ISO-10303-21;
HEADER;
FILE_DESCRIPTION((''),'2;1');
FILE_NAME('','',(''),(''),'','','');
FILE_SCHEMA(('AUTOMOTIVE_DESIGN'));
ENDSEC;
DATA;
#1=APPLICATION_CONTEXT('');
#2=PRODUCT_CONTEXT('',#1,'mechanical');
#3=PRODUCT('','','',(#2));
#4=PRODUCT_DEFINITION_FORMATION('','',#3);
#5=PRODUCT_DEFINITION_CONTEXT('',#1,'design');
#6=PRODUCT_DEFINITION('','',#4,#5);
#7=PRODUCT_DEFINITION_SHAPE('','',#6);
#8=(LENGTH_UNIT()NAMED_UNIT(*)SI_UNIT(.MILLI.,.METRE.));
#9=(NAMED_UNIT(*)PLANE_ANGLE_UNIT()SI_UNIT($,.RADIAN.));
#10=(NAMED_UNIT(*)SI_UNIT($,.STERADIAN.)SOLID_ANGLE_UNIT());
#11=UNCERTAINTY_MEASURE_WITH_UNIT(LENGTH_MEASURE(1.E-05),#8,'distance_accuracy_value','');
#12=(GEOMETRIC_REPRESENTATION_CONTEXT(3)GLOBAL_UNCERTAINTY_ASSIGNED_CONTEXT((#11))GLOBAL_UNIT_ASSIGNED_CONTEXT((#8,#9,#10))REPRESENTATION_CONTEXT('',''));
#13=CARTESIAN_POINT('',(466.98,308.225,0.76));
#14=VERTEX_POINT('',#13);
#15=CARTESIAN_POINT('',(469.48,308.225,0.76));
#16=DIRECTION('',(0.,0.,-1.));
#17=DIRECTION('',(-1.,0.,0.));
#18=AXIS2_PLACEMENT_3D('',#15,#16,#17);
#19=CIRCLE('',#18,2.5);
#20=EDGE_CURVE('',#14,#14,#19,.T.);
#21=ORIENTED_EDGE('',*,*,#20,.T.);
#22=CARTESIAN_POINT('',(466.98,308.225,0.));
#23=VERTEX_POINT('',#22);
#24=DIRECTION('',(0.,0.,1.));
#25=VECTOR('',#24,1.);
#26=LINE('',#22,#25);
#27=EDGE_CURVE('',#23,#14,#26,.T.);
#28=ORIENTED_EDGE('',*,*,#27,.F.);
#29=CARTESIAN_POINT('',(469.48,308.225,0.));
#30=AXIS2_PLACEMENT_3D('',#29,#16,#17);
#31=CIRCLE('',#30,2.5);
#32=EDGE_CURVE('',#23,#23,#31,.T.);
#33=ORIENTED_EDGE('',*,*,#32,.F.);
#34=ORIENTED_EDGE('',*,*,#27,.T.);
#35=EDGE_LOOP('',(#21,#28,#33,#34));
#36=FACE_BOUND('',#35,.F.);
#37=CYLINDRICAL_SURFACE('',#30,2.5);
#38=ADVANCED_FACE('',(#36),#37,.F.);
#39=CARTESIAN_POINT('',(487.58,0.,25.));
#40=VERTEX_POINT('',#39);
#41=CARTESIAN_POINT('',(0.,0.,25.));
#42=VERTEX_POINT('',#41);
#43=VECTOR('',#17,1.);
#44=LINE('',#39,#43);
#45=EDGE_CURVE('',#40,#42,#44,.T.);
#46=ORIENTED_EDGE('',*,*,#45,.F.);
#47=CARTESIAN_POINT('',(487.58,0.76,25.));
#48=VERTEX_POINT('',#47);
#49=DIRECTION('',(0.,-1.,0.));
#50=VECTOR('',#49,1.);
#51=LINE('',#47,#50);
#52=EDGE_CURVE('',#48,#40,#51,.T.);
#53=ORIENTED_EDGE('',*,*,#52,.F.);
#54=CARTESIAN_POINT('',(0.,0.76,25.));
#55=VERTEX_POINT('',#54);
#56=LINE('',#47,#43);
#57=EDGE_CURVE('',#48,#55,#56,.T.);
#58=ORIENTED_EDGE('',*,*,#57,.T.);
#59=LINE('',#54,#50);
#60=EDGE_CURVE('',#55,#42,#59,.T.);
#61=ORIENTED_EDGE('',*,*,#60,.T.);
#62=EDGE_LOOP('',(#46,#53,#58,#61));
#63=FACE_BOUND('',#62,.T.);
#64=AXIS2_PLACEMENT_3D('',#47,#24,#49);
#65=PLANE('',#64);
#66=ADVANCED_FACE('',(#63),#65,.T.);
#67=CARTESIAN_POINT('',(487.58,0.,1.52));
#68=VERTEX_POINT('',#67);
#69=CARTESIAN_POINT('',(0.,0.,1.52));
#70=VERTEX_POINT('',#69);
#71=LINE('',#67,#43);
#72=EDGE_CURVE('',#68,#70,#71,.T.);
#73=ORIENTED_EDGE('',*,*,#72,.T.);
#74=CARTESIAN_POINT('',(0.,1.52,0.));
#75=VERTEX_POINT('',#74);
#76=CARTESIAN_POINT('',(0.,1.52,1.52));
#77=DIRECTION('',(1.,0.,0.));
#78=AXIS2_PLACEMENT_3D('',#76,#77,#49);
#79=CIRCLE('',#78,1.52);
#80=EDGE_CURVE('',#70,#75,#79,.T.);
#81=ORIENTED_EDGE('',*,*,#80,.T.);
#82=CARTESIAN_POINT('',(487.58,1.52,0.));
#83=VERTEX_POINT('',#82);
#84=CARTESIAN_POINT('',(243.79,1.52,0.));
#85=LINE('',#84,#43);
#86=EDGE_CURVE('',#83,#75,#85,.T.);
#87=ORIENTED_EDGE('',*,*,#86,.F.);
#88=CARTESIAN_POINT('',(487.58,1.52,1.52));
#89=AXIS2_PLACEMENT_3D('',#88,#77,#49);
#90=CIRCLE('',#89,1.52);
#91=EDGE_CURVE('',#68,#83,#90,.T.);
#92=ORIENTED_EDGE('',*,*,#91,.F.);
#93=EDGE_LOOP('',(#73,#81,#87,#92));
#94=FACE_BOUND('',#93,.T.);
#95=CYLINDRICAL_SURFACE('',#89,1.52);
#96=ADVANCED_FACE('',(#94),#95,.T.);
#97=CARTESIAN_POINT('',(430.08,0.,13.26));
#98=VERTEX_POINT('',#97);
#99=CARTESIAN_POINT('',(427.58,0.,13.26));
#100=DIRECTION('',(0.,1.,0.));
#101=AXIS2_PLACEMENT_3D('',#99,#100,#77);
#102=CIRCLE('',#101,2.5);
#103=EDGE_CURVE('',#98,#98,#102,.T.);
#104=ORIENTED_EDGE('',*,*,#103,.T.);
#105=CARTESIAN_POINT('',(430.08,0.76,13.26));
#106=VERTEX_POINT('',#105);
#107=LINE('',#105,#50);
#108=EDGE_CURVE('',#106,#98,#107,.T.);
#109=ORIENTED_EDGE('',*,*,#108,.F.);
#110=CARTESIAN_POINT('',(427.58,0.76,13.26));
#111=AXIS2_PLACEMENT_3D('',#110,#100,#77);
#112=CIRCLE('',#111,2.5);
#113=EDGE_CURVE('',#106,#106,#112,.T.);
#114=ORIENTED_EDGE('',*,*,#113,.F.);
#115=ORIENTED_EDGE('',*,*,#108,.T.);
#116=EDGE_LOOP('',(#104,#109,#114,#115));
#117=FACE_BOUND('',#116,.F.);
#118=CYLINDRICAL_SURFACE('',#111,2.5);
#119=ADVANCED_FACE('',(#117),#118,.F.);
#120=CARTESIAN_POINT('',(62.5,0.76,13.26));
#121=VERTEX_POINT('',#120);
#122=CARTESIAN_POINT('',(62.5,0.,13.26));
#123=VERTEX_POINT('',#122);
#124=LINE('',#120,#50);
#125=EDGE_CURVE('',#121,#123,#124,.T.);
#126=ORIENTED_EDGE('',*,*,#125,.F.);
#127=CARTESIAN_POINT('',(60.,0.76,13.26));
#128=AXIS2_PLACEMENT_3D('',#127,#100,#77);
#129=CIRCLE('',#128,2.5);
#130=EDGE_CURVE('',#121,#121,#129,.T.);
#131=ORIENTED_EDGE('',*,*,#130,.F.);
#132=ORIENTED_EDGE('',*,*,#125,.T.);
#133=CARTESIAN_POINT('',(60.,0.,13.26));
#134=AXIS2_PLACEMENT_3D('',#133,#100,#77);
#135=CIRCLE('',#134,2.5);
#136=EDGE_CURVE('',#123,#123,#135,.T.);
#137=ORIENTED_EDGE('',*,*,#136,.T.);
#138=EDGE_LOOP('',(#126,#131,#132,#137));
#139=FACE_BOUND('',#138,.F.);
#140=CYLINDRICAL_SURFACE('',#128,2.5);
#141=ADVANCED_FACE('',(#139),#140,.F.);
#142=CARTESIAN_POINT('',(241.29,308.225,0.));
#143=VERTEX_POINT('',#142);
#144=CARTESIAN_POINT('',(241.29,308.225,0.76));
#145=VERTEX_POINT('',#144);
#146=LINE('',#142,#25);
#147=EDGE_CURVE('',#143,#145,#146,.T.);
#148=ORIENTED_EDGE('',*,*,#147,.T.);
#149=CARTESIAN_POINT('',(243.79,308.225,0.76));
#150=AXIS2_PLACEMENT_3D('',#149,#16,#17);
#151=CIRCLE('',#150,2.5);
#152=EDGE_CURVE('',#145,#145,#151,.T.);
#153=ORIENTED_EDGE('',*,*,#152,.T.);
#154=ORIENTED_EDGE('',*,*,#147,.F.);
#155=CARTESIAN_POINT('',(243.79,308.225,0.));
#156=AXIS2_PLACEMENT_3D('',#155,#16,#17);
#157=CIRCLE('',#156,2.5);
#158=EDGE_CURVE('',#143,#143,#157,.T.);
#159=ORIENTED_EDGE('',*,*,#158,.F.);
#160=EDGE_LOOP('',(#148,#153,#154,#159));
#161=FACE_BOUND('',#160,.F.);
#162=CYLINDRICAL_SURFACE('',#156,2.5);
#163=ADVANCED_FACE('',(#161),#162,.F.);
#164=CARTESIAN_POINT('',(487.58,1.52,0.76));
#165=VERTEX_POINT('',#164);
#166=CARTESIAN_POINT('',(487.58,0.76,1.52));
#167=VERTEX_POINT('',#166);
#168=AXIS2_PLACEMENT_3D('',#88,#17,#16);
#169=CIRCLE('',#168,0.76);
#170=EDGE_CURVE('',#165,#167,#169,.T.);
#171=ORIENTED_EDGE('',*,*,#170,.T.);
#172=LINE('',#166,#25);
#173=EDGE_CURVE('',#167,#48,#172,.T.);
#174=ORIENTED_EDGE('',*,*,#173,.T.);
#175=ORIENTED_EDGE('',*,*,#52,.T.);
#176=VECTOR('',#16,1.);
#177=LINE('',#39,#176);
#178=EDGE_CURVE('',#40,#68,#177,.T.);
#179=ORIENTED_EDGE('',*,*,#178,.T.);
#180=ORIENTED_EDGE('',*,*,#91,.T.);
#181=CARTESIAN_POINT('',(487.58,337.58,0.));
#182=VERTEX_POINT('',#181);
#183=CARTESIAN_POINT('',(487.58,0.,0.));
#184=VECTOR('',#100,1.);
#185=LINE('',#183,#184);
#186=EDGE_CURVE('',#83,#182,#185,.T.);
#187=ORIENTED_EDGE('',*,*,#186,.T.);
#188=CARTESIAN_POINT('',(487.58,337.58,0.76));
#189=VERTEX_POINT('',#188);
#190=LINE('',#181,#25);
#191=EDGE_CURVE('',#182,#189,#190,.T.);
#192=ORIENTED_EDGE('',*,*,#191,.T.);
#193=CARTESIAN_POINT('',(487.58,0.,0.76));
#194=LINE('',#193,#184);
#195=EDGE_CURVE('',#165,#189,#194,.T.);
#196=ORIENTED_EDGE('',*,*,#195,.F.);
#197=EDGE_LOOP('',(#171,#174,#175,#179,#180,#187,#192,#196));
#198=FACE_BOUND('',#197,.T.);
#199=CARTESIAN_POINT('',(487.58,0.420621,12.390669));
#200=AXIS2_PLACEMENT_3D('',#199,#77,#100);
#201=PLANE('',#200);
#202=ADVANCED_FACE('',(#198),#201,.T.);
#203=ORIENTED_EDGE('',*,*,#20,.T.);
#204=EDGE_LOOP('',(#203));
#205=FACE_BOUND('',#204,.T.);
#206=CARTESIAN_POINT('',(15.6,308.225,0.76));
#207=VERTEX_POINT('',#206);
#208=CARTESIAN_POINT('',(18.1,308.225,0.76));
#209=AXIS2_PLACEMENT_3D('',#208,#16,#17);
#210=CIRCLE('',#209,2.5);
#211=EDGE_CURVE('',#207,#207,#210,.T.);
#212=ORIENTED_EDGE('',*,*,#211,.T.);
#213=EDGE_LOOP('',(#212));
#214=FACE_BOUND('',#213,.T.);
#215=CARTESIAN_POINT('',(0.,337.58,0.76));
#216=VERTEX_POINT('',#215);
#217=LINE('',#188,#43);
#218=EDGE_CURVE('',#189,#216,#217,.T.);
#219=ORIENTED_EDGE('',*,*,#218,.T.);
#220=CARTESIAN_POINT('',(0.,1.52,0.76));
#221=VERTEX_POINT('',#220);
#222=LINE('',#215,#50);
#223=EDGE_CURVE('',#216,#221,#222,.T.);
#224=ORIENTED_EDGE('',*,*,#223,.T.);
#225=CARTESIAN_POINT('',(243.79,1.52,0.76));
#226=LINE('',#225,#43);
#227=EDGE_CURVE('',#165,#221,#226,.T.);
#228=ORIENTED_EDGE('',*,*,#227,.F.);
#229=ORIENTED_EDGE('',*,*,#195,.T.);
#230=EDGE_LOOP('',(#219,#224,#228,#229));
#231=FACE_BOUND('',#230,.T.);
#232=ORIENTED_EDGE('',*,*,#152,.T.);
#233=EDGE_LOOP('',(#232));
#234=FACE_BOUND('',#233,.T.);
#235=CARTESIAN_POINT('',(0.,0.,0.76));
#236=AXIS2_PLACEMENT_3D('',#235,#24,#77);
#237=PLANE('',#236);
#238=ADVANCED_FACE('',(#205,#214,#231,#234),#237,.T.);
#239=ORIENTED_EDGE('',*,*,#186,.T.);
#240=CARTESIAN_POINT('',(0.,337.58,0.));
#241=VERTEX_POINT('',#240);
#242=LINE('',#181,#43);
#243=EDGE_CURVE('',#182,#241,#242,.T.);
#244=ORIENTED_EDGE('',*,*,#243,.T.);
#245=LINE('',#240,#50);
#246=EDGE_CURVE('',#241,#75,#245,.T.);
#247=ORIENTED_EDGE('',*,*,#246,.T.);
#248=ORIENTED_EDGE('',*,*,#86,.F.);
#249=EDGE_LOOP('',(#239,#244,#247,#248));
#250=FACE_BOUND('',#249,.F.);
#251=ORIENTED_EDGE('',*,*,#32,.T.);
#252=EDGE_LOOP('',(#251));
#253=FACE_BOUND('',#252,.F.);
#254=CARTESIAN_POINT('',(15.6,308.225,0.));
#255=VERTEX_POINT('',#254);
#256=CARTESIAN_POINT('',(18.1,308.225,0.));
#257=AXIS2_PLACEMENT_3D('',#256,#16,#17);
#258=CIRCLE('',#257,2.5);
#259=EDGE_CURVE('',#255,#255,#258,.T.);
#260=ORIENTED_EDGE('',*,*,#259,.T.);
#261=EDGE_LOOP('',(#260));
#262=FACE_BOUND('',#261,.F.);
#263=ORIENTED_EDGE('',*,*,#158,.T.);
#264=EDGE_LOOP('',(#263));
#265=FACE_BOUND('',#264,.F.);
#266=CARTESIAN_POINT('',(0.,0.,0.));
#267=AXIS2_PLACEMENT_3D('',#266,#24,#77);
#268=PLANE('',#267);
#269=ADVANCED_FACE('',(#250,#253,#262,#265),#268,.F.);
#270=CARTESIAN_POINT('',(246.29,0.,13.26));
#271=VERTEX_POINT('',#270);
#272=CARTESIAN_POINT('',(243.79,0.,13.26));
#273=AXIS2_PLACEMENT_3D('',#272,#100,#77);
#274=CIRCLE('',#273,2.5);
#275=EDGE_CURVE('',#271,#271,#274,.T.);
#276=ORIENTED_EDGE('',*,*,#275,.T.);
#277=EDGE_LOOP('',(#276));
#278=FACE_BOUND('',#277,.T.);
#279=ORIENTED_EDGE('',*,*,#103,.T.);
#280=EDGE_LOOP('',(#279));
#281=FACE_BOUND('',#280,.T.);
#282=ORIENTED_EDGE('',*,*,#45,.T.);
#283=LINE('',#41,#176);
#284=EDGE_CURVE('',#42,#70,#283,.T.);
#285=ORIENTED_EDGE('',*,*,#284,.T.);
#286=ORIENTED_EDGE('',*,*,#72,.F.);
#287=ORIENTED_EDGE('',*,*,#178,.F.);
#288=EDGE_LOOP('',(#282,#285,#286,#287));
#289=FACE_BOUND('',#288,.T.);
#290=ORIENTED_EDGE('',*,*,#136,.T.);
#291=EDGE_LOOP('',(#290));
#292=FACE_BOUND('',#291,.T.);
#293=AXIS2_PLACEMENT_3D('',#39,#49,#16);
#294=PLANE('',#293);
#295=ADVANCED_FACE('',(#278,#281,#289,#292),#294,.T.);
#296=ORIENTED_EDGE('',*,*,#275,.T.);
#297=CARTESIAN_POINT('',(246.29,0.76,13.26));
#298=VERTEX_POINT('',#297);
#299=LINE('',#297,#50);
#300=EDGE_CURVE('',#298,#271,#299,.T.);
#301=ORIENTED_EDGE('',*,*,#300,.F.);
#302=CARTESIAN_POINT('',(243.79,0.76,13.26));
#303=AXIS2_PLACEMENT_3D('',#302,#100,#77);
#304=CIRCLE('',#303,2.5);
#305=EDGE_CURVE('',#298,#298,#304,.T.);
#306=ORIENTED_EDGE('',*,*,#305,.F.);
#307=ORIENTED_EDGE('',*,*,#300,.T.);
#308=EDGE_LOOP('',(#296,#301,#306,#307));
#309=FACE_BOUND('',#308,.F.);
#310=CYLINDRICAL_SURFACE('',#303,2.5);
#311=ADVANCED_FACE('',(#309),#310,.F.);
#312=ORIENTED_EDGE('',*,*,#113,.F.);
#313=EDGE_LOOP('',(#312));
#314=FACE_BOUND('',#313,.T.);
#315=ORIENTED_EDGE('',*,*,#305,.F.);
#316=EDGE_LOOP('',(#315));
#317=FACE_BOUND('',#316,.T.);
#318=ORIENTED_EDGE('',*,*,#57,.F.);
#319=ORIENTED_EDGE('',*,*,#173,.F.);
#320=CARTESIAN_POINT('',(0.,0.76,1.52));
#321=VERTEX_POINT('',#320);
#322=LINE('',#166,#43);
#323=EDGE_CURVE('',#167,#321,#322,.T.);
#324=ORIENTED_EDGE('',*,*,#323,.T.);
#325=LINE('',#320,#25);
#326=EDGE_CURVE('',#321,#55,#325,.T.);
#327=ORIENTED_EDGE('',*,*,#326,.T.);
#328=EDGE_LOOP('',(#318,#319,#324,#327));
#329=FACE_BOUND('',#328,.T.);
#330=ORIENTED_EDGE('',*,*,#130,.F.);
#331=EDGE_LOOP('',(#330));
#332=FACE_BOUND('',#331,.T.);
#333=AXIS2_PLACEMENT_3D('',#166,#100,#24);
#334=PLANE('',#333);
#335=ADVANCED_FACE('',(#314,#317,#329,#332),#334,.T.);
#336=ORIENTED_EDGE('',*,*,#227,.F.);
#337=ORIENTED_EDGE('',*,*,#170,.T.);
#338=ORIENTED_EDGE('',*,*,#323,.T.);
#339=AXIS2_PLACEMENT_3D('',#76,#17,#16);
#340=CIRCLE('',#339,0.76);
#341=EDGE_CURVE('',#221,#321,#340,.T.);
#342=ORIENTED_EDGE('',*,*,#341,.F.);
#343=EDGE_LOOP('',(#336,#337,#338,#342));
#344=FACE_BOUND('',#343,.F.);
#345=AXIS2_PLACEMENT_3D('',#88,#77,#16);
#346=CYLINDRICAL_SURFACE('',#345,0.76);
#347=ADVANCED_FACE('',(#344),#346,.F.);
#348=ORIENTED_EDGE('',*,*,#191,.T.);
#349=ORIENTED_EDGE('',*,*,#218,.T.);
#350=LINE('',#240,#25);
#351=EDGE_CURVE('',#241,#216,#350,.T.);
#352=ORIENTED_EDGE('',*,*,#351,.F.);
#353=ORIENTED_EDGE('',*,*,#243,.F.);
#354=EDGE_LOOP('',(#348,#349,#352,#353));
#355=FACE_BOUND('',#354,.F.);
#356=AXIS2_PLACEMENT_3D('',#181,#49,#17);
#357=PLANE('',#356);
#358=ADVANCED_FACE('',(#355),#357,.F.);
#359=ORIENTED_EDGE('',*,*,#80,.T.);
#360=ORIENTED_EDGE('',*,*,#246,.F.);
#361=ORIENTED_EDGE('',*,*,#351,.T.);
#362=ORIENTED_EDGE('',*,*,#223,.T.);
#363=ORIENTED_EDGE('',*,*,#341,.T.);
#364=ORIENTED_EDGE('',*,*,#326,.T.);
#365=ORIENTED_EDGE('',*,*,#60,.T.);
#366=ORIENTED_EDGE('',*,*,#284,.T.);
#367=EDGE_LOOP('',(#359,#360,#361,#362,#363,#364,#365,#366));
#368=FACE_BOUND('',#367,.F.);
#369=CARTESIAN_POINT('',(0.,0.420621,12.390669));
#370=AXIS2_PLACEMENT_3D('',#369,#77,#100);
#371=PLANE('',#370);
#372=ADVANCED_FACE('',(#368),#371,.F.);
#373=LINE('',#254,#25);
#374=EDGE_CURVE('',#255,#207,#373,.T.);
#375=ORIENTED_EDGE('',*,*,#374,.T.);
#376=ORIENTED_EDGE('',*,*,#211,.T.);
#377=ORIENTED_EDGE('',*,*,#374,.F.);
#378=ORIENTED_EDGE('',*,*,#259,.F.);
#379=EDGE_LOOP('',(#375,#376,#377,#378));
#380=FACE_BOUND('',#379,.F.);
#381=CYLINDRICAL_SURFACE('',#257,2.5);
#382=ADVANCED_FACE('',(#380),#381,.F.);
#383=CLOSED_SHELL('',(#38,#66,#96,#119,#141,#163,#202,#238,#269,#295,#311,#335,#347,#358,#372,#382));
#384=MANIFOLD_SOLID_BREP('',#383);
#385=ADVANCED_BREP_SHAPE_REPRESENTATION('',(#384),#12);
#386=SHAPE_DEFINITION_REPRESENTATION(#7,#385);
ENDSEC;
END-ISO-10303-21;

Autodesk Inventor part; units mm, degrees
ref_plane "YZ Plane" through (0, 0, 0) normal (1, 0, 0) x (0, 1, 0)
ref_plane "XZ Plane" through (0, 0, 0) normal (0, 1, 0) x (-1, 0, 0)
ref_plane "XY Plane" through (0, 0, 0) normal (0, 0, 1) x (1, 0, 0)
sketch "Boceto1" plane through (0, 0, 0) normal (0, 0, 1) x (1, 0, 0)
  line L0 (0, 0) -> (487.58, 0)
  line L1 (487.58, 0) -> (487.58, 337.58)
  line L2 (487.58, 337.58) -> (0, 337.58)
  line L3 (0, 337.58) -> (0, 0)
  dimension "d0" = 487.58
  dimension "d1" = 337.58
extrude "Placa1" add sketch "Boceto1" along normal blind 0.76
sketch "Boceto2" plane through (487.58, 0.76, 0) normal (0, -1, 0) x (1, 0, 0)
  line L0 (-487.58, 0) -> (0, 0)
  line L1 (0, 0) -> (0, 25)
  line L2 (0, 25) -> (-487.58, 25)
  line L3 (-487.58, 25) -> (-487.58, 0)
edge flange "Pestaña1" height 25 angle 90 thickness 0.76 bend radius 0.76 thickness toward (0, -1, 0) relief tear relief width 0.76 relief depth 0.38 edges at (243.79, 0, 0.76) wall of the first edge with corners at (0, 0.76, 0) (487.58, 0.76, 0) (487.58, 0.76, 25) (0, 0.76, 25)
bend "Doblez1"
corner "Esquina1"
sketch "Boceto3" plane through (0, 0, 0) normal (0, 0, -1) x (-1, 0, 0)
  circle A0 centre (-469.48, 308.225) radius 2.5 projected
  circle A1 centre (-243.79, 308.225) radius 2.5 projected
  circle A2 centre (-18.1, 308.225) radius 2.5 projected
  point P0 (0, 0)
extrude "Cortar1" cut sketch "Boceto3" against normal blind 0.76
sketch "Boceto4" plane through (0, 0.76, 25) normal (0, 1, 0) x (1, 0, 0)
  line L0 (0, 23.48) -> (0, 0) projected
  line L1 (487.58, 23.48) -> (487.58, 0) projected
  line L2 (0, 0) -> (487.58, 0) projected
  line L3 (0, 23.48) -> (487.58, 23.48) projected
  line L4 (0, 23.48) -> (0, 0) projected
  circle A0 centre (60, 11.74) radius 2.5
  circle A1 centre (243.79, 11.74) radius 2.5
  circle A2 centre (427.58, 11.74) radius 2.5
  point P0 (0, 25)
  dimension "d15" = 60
  dimension "d16" = 60
  dimension "d17" = 5
  dimension "d18" = 5
  dimension "d19" = 5
extrude "Extrusión1" cut sketch "Boceto4" against normal through all contours A0 | A1 | A2
thread "Rosca1" size "M5x0.8" class "6H" standard "ANSI Metric M Profile" length 16
thread "Rosca2" size "M5x0.8" class "6H" standard "ANSI Metric M Profile" length 16
thread "Rosca3" size "M5x0.8" class "6H" standard "ANSI Metric M Profile" length 16
equation "\"d13\" = Grosor"
equation "\"d18\" = d17"
equation "\"d19\" = d17"
equation "\"d2\" = Grosor"
equation "\"d3\" = Anchura_desahogo_plegado"
equation "\"d4\" = Profundidad_desahogo_plegado"
equation "\"d5\" = Remanente_mínimo"
equation "\"d6\" = Radiodetransición"
equation "\"d9\" = Radio_pliegue"
equation "\"d10\" = Tamaño_destalonado"
equation "\"d11\" = TamañoSeparación"
equation "\"d12\" = Tamaño_de_radio_de_Jacobi"
equation "\"Radio_pliegue\" = Grosor"
equation "\"Anchura_desahogo_plegado\" = Grosor"
equation "\"Profundidad_desahogo_plegado\" = 0.5 * Grosor"
equation "\"Tamaño_destalonado\" = 4 * Grosor"
equation "\"Remanente_mínimo\" = 2 * Grosor"
equation "\"Radiodetransición\" = Radio_pliegue"
equation "\"Tamaño_de_radio_de_Jacobi\" = Radio_pliegue"
equation "\"TamañoSeparación\" = Grosor"
equation "\"Grosor\" = 0.76"
properties part number "Tapa_interior_2" material "Acero AISI 1006 85 LC"
